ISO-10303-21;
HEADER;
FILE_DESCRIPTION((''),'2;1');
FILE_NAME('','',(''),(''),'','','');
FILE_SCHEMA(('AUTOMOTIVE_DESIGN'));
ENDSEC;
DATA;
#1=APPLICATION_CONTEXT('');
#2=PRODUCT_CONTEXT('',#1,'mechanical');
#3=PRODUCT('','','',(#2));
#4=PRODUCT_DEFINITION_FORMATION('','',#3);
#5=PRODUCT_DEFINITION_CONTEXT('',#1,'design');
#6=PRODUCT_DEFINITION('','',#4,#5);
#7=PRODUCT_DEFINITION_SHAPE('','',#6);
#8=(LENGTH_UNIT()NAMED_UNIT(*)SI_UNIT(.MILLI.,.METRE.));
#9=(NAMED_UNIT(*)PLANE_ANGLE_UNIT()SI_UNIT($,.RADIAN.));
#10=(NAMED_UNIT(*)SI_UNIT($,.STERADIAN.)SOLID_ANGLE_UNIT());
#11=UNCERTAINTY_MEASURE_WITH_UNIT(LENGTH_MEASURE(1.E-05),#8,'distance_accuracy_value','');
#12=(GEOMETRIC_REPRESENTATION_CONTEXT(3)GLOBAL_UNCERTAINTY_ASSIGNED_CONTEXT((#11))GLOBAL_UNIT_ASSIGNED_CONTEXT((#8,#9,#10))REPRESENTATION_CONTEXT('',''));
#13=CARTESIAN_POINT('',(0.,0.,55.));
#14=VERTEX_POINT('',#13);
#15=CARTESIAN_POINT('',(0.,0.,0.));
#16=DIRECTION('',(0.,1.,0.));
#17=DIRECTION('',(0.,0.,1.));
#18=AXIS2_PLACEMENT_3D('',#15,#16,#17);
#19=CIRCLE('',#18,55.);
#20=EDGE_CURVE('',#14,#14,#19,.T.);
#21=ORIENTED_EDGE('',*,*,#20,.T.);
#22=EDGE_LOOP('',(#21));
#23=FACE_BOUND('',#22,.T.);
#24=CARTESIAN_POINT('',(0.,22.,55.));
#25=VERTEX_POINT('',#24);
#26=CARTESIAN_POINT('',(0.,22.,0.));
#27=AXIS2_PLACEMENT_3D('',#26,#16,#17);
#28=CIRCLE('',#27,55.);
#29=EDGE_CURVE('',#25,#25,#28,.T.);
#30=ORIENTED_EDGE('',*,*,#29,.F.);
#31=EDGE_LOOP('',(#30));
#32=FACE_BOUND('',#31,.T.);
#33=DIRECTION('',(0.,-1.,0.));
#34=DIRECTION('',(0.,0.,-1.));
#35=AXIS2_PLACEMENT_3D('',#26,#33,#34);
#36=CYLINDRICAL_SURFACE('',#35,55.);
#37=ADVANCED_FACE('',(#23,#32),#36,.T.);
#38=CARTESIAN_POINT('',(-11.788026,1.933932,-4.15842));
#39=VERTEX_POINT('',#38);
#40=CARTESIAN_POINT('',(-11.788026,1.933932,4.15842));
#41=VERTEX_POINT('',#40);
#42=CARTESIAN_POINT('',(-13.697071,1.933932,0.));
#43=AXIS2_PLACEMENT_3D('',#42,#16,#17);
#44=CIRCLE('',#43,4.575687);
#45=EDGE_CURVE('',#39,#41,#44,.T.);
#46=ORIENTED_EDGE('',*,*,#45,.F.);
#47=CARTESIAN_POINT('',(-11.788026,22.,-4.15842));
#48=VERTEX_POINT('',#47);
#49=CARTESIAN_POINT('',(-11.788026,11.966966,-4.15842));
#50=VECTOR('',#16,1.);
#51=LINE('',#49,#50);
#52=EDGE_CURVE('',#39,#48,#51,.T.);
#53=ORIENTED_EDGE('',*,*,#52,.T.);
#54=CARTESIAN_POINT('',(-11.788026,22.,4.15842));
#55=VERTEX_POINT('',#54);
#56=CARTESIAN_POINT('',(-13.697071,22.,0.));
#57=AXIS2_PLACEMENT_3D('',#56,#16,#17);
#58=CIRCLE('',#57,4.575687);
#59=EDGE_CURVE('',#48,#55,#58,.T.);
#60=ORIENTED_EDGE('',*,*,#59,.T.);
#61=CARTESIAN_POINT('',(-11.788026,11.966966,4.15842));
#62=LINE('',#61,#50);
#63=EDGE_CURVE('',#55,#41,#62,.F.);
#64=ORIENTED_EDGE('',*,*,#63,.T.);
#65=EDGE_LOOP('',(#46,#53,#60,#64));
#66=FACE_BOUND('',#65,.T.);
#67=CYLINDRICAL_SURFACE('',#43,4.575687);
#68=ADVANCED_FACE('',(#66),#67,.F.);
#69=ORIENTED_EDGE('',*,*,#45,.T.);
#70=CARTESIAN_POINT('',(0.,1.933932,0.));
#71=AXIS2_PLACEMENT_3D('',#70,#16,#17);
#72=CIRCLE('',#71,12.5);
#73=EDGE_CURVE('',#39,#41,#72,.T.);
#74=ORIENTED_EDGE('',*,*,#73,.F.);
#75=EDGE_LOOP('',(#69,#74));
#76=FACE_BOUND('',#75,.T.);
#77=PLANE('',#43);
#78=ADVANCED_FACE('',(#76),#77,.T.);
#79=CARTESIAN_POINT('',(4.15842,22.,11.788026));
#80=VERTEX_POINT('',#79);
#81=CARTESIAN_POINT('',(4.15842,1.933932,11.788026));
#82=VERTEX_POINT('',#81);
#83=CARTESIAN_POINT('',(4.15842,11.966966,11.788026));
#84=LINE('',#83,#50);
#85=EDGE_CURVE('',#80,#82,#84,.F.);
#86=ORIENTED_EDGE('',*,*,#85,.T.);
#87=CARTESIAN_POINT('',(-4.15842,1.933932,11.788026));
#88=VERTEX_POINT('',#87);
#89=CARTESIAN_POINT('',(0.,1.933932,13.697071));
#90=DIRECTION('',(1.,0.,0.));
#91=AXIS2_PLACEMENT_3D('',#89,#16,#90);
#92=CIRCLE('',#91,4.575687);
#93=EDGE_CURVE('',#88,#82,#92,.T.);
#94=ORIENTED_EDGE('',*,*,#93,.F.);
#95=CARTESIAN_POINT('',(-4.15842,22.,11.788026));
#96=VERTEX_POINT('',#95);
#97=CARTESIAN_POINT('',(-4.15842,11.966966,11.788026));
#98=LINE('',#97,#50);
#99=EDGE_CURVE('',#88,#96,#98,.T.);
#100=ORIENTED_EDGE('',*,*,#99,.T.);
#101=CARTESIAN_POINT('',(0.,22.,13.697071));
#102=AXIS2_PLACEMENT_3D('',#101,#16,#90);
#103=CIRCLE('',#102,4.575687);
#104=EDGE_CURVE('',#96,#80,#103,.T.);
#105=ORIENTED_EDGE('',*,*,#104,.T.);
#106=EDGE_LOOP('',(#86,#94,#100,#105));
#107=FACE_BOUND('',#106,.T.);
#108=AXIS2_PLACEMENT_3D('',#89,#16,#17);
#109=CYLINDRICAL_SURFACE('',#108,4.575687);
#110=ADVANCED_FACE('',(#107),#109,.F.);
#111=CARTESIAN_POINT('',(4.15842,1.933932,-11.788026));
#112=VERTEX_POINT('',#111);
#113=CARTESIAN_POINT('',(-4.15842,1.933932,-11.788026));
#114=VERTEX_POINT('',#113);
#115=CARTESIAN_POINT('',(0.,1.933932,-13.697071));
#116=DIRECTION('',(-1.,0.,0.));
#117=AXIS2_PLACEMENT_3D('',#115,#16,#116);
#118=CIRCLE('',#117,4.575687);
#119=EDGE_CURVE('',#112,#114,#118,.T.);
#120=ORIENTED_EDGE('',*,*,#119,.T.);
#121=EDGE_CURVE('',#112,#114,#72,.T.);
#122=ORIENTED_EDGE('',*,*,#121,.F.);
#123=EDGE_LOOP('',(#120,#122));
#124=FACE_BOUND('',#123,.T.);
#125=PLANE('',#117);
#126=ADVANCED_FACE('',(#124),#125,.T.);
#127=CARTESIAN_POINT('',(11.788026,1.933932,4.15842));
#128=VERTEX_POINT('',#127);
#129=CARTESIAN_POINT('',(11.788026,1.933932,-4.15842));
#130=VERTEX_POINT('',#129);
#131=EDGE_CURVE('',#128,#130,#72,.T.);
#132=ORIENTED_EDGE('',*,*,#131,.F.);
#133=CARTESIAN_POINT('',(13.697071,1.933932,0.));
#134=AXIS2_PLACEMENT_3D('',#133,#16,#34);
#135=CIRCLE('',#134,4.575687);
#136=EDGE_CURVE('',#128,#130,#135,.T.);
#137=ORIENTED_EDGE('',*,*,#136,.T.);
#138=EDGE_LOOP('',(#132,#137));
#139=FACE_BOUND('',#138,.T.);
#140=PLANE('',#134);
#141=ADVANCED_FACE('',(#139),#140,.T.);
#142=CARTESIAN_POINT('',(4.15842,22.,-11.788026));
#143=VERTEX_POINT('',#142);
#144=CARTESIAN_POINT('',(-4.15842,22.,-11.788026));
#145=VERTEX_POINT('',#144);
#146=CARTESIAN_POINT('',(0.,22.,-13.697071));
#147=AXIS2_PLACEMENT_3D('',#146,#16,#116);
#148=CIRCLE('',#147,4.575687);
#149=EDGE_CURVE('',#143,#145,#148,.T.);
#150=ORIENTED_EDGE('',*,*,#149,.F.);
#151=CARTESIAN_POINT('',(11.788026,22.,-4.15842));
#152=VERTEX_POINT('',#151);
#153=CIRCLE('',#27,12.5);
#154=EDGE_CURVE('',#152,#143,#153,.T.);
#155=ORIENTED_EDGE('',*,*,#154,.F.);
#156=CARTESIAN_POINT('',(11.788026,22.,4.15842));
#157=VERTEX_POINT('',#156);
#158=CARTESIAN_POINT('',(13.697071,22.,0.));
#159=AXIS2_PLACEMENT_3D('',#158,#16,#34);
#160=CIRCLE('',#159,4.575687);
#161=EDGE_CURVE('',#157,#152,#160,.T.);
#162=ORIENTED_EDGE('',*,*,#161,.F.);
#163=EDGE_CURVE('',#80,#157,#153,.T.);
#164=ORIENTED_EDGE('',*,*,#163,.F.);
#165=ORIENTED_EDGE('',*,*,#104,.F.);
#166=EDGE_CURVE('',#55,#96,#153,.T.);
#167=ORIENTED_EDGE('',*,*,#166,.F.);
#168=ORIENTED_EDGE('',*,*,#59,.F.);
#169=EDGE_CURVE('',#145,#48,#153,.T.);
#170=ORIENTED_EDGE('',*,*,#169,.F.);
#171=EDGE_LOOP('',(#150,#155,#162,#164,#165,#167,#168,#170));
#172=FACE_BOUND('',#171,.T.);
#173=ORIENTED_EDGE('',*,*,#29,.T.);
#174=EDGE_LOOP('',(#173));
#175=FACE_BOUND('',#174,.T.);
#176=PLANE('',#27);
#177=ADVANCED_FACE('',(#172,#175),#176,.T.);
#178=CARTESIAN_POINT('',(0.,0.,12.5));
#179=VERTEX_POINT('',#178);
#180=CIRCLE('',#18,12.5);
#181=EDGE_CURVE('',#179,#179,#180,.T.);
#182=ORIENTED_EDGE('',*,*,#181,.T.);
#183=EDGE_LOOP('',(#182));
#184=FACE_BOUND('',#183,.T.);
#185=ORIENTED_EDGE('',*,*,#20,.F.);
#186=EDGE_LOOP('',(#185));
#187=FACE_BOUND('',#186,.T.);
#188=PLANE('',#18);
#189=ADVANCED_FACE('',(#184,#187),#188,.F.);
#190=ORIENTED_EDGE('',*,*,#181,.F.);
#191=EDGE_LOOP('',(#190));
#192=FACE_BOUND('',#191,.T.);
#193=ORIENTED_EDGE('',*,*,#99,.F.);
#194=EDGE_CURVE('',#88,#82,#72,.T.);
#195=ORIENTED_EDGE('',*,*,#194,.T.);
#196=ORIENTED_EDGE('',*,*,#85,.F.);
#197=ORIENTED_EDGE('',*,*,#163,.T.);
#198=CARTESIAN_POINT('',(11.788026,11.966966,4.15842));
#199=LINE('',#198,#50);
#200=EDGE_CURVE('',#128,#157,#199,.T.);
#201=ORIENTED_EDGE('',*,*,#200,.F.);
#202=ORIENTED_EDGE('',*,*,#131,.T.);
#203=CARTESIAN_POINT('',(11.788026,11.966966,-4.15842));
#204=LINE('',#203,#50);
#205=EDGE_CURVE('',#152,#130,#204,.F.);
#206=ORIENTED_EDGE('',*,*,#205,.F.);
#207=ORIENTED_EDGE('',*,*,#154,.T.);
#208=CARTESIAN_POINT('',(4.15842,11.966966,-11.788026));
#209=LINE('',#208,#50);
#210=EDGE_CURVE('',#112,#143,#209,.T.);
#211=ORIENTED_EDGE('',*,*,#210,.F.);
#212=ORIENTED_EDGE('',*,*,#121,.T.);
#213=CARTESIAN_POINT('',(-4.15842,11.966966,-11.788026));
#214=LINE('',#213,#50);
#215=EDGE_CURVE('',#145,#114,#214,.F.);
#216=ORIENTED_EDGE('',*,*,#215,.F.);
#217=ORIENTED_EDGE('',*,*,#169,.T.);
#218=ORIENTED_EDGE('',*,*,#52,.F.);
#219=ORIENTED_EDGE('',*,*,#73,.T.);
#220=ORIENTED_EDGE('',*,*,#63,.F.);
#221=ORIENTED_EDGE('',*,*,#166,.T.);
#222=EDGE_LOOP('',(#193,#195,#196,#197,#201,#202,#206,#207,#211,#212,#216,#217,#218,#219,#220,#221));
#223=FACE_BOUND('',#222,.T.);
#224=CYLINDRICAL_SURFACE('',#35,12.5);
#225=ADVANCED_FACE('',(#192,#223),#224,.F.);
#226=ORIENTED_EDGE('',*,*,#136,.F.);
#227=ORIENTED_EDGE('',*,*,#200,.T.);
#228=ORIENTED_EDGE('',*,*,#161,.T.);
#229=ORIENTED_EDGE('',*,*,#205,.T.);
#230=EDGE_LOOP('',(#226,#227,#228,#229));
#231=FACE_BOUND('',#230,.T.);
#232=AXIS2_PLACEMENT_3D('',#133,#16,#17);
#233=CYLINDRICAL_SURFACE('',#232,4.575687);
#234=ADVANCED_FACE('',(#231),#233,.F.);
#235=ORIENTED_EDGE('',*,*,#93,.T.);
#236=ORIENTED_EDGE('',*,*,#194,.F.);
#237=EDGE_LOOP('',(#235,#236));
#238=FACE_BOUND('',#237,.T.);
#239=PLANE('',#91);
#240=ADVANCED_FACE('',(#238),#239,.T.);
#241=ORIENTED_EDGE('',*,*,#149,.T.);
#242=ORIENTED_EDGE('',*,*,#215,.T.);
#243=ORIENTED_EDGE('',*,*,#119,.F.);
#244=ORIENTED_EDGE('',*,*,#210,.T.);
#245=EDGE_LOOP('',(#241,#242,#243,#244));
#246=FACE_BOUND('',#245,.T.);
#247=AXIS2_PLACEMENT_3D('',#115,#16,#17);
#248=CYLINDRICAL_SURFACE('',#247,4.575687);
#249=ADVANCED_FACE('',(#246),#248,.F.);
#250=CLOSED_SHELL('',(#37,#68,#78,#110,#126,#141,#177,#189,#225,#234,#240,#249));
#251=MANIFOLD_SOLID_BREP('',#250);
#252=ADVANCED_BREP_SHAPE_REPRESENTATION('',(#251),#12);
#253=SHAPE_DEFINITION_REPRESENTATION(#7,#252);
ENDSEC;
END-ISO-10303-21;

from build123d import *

# Parameters (mm, degrees)
SKETCH1_R           = 55
BOSS_EXTRUDE1_DEPTH = 22
SKETCH2_R           = 12.5
CUT_EXTRUDE1_DEPTH  = 81.833161512
SKETCH3_R           = 4.575686768
CUT_EXTRUDE2_DEPTH  = 20.066068192
CIRPATTERN1_COUNT   = 4


with BuildPart() as part:
    # Sketch1 → Boss-Extrude1 (new body)
    with BuildSketch(Plane(origin=(0, 0, 0), x_dir=(1, 0, 0), z_dir=(0, 1, 0))):
        Circle(SKETCH1_R)
    extrude(amount=BOSS_EXTRUDE1_DEPTH)

    # Sketch2 → Cut-Extrude1 (cut, through all)
    with BuildSketch(Plane(origin=(0, 0, 0), x_dir=(1, 0, 0), z_dir=(0, 1, 0))):
        Circle(SKETCH2_R)
    extrude(amount=CUT_EXTRUDE1_DEPTH, mode=Mode.SUBTRACT)

    # Sketch3 → Cut-Extrude2 (cut)
    with BuildSketch(Plane(origin=(0, 22, 0), x_dir=(1, 0, 0), z_dir=(0, 1, 0))):
        with Locations((-13.697071133, 0)):
            Circle(SKETCH3_R)
    cut_extrude2 = extrude(amount=-CUT_EXTRUDE2_DEPTH, mode=Mode.SUBTRACT)

    # CirPattern1: Cut-Extrude2 ×4 about axis
    cirpattern1_axis = Axis((0, 0, 0), (0, 1, 0))
    for i in range(1, CIRPATTERN1_COUNT):
        add(cut_extrude2.rotate(cirpattern1_axis, i * 360 / CIRPATTERN1_COUNT), mode=Mode.SUBTRACT)


solid = part.part
